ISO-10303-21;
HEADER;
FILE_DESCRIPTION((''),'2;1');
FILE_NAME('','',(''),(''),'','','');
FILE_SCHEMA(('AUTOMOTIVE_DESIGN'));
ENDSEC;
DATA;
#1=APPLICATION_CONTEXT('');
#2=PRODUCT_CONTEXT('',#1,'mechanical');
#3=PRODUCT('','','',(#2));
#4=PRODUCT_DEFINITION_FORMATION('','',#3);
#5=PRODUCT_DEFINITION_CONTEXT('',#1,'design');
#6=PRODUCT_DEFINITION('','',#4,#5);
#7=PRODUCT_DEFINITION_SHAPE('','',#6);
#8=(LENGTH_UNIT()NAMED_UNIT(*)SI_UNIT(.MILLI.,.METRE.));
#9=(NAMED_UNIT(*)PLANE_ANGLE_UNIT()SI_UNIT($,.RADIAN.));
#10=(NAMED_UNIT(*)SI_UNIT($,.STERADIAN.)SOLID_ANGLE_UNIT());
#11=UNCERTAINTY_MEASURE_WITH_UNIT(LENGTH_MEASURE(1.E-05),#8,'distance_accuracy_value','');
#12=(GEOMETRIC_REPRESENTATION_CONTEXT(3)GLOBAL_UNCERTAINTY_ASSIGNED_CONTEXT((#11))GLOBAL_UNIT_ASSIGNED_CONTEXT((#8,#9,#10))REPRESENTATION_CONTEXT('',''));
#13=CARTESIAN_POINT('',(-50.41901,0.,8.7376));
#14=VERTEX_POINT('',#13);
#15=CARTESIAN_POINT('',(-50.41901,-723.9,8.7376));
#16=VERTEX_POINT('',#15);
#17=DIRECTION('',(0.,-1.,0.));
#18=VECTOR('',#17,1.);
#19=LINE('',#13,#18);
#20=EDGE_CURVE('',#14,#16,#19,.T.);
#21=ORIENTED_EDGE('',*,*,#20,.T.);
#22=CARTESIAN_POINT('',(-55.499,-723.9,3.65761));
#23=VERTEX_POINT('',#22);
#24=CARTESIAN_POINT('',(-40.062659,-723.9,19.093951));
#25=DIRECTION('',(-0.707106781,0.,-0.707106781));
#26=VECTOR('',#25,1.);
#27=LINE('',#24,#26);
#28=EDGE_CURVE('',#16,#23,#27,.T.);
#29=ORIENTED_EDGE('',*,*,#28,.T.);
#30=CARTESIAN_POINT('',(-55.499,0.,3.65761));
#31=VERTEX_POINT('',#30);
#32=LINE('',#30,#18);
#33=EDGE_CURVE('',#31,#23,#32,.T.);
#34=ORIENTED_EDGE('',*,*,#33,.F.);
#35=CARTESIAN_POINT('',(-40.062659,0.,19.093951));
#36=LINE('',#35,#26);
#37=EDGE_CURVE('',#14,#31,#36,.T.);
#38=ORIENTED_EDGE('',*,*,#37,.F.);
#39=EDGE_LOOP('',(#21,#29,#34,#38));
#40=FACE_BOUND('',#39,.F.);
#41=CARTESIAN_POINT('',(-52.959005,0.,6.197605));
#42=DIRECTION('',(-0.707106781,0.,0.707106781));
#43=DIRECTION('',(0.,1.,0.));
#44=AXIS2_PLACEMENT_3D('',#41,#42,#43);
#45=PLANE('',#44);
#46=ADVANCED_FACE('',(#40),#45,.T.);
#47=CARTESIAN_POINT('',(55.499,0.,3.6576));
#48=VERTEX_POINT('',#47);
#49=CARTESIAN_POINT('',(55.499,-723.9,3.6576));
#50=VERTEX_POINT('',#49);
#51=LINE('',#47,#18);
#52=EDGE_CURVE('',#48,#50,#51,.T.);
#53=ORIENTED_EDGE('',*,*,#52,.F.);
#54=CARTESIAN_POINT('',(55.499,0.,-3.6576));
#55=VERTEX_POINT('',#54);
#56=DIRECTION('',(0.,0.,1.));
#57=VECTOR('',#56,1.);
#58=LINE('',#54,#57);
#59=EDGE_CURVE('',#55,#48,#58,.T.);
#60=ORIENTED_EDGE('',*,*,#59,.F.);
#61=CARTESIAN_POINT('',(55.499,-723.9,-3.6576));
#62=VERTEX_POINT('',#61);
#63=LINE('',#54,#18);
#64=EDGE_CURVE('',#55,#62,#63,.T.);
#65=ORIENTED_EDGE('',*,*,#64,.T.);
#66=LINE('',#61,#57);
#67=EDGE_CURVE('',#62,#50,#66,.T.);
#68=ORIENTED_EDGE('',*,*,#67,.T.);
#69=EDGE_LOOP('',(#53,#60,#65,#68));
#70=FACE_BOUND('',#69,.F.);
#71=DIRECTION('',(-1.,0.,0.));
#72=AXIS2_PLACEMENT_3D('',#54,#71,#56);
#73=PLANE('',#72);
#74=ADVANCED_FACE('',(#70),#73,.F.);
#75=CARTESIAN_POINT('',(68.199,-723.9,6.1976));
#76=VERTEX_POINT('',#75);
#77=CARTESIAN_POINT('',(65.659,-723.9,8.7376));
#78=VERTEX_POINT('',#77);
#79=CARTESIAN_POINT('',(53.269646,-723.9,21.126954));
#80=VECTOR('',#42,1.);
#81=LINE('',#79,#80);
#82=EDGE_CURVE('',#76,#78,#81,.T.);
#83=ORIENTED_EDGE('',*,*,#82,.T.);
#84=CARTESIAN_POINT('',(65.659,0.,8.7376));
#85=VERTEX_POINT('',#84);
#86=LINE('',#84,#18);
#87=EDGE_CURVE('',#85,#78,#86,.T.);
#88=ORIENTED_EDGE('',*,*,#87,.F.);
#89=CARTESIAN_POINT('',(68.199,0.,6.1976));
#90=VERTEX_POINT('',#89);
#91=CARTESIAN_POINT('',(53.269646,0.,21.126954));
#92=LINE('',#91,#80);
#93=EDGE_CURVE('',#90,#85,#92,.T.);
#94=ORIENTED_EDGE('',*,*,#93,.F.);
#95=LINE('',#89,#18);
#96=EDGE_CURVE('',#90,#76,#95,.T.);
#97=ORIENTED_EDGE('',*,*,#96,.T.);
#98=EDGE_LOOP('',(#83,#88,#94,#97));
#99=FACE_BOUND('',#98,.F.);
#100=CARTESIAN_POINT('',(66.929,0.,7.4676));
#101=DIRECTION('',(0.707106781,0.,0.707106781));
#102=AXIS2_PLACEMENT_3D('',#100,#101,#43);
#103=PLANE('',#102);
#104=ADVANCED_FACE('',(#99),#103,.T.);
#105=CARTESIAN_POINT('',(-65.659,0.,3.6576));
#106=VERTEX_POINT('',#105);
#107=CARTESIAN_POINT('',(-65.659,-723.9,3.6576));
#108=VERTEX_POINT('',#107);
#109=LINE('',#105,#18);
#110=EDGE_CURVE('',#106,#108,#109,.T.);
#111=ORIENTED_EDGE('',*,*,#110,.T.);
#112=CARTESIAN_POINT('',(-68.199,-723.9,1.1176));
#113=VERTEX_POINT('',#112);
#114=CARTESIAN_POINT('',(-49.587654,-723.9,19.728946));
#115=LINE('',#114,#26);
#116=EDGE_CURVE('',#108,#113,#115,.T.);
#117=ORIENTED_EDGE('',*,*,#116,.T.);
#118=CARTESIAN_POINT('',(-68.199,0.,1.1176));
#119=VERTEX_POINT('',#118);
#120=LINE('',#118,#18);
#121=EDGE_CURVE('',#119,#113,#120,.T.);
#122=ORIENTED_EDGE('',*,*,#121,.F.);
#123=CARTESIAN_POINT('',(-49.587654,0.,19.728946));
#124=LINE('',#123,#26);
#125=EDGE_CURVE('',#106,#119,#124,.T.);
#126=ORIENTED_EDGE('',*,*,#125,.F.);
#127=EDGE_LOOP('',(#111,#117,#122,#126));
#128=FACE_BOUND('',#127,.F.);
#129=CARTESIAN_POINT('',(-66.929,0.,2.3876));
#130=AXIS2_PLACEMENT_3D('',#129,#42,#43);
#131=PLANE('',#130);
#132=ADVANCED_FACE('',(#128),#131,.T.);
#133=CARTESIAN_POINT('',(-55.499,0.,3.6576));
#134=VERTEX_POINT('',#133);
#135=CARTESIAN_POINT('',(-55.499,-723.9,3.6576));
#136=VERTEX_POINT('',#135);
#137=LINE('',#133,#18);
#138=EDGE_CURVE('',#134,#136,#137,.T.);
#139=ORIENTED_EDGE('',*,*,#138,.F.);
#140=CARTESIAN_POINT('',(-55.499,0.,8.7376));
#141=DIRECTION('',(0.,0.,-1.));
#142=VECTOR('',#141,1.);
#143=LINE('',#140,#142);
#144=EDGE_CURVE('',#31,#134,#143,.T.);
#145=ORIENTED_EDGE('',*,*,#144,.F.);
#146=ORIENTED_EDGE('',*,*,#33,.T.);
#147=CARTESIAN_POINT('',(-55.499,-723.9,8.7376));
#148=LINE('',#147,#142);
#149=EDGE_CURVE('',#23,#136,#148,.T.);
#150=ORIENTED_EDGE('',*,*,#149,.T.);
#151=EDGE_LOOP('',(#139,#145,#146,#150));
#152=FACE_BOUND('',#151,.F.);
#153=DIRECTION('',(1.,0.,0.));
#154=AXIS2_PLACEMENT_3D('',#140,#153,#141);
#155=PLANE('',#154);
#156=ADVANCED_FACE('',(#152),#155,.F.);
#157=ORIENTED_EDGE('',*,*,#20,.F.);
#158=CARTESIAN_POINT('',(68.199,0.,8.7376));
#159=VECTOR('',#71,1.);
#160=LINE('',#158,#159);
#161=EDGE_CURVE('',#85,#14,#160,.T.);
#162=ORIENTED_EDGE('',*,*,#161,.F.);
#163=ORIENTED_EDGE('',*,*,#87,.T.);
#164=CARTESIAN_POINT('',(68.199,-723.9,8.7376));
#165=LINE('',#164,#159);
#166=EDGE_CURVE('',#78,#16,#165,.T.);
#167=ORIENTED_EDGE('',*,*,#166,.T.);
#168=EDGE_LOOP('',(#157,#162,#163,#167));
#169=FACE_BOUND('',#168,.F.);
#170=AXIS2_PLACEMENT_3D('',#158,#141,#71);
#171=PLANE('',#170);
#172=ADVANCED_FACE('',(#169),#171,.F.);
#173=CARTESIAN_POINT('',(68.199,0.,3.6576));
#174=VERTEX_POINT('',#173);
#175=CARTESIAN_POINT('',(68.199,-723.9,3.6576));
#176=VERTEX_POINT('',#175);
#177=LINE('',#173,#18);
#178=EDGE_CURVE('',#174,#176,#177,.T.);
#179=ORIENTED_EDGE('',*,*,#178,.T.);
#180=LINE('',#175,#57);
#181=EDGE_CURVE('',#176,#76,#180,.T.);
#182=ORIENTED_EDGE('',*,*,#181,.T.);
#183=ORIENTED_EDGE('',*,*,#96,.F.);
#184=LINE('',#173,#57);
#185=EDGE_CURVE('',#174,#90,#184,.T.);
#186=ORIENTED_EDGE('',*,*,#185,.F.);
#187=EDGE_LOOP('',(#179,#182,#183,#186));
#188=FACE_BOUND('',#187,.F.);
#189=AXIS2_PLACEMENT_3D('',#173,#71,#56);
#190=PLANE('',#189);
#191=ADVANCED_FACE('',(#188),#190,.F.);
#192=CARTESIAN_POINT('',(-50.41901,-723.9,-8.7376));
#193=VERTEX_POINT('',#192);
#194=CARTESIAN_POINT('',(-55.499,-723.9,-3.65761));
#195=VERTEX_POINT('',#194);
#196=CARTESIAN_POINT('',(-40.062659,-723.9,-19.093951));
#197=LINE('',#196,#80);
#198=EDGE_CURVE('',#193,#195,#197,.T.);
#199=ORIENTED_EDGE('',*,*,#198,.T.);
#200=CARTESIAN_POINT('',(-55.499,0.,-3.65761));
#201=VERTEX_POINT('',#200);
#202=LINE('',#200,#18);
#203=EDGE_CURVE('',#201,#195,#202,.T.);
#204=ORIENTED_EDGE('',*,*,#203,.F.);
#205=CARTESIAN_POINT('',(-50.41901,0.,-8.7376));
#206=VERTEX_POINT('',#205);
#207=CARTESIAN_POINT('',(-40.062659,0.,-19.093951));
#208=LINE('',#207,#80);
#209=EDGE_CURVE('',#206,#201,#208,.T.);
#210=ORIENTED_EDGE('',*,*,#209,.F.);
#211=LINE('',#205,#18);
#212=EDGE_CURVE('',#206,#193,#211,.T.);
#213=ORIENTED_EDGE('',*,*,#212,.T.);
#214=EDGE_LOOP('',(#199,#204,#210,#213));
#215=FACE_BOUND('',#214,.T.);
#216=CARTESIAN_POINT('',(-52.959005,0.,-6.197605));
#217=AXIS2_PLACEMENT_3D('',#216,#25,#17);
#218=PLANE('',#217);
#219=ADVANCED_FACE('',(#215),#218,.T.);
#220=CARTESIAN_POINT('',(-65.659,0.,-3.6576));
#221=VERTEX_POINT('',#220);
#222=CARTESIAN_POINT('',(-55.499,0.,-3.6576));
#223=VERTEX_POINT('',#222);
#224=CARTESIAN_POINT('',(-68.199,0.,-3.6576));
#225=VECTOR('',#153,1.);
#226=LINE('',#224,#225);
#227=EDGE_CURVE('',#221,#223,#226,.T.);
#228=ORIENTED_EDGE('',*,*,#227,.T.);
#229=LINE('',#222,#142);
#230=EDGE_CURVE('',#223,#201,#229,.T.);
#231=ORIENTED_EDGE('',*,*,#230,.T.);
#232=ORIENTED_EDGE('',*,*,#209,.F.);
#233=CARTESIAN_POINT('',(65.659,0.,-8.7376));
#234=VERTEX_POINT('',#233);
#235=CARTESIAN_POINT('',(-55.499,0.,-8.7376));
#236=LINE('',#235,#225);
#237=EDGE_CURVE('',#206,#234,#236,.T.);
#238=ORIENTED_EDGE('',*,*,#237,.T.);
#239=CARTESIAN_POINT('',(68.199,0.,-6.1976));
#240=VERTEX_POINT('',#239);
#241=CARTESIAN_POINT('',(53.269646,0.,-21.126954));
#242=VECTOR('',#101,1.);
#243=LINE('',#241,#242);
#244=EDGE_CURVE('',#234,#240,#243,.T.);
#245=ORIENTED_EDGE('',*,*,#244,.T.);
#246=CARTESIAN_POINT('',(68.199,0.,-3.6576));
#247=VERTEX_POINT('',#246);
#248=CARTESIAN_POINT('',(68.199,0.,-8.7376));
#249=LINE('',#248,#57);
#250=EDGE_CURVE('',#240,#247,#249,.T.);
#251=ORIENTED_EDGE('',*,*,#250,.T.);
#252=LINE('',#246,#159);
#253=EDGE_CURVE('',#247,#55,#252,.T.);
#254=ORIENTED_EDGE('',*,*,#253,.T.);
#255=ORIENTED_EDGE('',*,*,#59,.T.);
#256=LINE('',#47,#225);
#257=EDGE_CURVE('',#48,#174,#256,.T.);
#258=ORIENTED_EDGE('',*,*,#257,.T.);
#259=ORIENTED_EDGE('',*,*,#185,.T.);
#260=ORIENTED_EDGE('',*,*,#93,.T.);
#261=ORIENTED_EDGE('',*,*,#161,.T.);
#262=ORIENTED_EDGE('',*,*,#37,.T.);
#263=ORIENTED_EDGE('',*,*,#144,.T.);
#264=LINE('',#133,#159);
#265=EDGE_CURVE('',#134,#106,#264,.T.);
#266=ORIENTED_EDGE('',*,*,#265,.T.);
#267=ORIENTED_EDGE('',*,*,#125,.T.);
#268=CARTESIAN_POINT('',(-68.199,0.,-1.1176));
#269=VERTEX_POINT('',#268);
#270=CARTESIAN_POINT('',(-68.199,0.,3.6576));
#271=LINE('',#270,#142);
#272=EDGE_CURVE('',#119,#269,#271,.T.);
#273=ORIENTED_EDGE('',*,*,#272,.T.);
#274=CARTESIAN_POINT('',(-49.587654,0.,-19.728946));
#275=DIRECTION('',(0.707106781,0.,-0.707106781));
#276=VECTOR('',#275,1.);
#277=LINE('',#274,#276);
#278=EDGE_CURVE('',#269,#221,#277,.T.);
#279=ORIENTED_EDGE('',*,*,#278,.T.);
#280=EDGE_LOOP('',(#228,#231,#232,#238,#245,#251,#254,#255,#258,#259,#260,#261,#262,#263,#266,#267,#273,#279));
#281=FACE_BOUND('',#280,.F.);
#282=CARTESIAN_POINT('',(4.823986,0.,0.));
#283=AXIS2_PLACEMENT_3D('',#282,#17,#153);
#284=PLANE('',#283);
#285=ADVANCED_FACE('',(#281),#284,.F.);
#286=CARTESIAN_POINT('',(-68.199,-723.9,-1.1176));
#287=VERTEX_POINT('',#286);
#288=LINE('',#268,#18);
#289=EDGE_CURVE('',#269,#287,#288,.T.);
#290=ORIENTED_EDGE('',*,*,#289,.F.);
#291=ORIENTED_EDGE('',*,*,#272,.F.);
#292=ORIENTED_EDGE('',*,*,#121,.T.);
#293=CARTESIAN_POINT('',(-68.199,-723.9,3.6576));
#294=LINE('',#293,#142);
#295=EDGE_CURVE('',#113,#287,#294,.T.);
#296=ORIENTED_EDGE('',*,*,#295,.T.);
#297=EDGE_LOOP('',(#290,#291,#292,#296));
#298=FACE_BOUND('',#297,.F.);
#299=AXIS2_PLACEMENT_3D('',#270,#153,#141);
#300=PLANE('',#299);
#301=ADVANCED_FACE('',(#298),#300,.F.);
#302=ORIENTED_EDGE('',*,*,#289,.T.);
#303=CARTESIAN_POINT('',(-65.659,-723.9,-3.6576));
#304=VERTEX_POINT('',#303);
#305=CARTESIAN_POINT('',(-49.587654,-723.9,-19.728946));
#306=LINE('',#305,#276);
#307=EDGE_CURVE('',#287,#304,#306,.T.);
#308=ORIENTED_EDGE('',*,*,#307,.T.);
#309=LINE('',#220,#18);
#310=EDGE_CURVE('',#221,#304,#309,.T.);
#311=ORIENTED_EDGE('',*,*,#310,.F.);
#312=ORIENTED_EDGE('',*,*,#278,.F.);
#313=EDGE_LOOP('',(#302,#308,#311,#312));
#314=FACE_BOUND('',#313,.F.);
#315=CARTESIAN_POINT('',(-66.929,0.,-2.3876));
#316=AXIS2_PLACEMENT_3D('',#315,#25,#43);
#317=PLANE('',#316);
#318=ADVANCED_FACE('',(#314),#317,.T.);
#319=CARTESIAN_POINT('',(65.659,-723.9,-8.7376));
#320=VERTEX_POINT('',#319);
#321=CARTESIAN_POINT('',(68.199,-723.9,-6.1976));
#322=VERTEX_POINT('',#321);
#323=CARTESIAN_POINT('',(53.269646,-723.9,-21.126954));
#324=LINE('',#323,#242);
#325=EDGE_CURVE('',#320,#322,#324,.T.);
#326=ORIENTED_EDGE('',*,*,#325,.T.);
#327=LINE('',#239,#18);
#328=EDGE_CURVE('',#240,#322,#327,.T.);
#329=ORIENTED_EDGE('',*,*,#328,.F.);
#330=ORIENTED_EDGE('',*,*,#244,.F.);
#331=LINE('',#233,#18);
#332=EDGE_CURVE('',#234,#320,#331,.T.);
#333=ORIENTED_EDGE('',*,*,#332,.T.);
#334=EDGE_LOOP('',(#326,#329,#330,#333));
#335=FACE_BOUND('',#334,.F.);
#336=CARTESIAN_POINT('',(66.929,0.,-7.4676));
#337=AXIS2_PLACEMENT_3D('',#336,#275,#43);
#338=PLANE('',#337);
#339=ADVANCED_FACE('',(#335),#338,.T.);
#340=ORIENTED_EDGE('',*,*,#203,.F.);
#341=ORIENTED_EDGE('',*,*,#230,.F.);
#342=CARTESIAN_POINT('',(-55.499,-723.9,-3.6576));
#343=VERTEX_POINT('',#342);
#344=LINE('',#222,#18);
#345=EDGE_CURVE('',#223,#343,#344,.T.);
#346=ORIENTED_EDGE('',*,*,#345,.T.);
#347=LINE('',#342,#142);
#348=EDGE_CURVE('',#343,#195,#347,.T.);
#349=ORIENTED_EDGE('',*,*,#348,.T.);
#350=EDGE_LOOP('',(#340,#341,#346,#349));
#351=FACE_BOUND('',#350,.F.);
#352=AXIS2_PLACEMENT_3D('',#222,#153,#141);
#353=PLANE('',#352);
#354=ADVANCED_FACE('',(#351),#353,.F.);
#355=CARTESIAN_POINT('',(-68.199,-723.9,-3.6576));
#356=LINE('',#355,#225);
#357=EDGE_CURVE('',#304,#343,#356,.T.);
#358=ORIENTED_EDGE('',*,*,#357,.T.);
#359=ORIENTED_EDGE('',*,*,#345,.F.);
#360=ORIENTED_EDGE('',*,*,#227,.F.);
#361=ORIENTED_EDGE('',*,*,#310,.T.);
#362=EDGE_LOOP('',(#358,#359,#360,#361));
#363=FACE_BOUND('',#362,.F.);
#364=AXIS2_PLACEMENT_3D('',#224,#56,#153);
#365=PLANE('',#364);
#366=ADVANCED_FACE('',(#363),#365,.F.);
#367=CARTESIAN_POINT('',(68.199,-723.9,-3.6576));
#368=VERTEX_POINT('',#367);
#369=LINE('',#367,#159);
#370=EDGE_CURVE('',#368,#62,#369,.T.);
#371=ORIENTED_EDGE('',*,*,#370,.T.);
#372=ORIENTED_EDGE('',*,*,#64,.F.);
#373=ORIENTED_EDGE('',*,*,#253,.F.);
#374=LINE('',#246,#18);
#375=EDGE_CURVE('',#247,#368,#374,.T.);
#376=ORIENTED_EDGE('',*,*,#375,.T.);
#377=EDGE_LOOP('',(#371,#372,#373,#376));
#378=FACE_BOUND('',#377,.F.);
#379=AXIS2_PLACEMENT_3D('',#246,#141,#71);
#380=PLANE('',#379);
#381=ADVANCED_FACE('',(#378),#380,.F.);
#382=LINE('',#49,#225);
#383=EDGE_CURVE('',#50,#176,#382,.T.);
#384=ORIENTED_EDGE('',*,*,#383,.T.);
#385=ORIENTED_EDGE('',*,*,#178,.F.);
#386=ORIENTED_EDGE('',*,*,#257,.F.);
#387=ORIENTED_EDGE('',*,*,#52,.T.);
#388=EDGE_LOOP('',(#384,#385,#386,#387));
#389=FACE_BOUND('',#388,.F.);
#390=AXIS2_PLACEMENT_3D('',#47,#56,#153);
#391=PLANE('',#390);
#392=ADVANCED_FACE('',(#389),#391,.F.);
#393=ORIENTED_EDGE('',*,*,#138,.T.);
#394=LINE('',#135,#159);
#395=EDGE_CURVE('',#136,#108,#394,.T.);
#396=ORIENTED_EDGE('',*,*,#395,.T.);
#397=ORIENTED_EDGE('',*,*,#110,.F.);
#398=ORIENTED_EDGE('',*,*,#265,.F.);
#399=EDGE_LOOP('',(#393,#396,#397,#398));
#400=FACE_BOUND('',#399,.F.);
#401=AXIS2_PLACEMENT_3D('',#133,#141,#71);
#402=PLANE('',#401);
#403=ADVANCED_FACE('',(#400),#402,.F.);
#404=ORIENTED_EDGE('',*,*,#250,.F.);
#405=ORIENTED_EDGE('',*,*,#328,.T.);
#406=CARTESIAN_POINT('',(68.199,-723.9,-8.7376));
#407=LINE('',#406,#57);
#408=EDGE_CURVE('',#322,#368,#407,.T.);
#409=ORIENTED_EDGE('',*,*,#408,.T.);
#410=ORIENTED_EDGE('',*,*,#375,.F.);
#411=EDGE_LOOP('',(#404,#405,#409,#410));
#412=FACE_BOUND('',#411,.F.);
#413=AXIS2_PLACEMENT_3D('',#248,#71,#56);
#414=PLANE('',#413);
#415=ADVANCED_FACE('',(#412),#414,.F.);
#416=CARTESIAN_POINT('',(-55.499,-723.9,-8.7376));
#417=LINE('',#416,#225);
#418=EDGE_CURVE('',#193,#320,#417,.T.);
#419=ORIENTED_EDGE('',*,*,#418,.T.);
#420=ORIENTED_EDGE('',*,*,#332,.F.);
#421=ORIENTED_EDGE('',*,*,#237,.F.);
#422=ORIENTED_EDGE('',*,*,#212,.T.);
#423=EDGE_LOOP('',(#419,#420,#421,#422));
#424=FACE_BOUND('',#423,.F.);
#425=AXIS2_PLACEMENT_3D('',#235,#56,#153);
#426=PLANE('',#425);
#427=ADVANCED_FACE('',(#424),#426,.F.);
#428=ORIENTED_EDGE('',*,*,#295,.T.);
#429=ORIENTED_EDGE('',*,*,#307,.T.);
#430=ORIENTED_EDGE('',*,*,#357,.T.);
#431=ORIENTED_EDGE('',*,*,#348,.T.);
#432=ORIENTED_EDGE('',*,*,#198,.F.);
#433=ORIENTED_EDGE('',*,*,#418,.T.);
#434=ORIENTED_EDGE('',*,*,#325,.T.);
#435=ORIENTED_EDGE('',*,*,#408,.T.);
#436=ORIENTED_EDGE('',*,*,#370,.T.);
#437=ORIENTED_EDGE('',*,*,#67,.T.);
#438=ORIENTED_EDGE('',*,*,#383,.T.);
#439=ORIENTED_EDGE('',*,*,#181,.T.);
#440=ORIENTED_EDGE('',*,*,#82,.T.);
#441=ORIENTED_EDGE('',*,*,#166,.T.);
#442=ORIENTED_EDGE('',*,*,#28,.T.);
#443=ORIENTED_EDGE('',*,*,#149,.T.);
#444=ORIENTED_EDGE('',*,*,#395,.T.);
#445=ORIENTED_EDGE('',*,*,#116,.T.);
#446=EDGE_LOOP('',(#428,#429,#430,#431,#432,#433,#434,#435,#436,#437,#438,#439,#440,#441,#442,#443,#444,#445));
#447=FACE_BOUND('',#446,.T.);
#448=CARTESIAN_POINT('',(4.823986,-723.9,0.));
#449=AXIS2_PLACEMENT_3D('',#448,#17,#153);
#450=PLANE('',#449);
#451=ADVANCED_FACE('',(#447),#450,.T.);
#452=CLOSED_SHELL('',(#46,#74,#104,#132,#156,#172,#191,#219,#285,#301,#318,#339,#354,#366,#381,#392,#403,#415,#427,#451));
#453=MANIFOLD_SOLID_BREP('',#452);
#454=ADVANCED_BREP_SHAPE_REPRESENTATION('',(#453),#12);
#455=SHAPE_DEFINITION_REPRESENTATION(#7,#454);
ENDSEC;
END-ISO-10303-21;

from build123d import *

# Parameters (mm, degrees)
F1_DEPTH = 723.9
F2_SIZE  = 2.54
F3_SIZE  = 5.07999


# Not quite as in the source:
# - a fillet or chamfer is up to 0.001 mm smaller than in the source, because OpenCascade refuses the exact size


with BuildPart() as f1:
    # F0 (on Front) → F1 (new body)
    with BuildSketch(Plane.XZ):
        Polygon((68.199, 3.6576), (68.199, 8.7376), (-55.499, 8.7376), (-55.499, 3.6576), (-68.199, 3.6576), (-68.199, -3.6576), (-55.499, -3.6576), (-55.499, -8.7376), (68.199, -8.7376), (68.199, -3.6576), (55.499, -3.6576), (55.499, 3.6576), align=None)
    extrude(amount=F1_DEPTH)

    # F2
    f2_edges = [f1.edges().sort_by_distance(p)[0] for p in [
        (68.199, -361.95, 8.7376),
        (68.199, -361.95, -8.7376),
        (-68.199, -361.95, 3.6576),
        (-68.199, -361.95, -3.6576),
    ]]
    chamfer(f2_edges, length=F2_SIZE)

    # F3 (size 5.08 in the source; OpenCascade refuses exactly that, so slightly less here)
    f3_edges = [f1.edges().sort_by_distance(p)[0] for p in [
        (-55.499, -361.95, 8.7376),
        (-55.499, -361.95, -8.7376),
    ]]
    chamfer(f3_edges, length=F3_SIZE)


solid = f1.part
